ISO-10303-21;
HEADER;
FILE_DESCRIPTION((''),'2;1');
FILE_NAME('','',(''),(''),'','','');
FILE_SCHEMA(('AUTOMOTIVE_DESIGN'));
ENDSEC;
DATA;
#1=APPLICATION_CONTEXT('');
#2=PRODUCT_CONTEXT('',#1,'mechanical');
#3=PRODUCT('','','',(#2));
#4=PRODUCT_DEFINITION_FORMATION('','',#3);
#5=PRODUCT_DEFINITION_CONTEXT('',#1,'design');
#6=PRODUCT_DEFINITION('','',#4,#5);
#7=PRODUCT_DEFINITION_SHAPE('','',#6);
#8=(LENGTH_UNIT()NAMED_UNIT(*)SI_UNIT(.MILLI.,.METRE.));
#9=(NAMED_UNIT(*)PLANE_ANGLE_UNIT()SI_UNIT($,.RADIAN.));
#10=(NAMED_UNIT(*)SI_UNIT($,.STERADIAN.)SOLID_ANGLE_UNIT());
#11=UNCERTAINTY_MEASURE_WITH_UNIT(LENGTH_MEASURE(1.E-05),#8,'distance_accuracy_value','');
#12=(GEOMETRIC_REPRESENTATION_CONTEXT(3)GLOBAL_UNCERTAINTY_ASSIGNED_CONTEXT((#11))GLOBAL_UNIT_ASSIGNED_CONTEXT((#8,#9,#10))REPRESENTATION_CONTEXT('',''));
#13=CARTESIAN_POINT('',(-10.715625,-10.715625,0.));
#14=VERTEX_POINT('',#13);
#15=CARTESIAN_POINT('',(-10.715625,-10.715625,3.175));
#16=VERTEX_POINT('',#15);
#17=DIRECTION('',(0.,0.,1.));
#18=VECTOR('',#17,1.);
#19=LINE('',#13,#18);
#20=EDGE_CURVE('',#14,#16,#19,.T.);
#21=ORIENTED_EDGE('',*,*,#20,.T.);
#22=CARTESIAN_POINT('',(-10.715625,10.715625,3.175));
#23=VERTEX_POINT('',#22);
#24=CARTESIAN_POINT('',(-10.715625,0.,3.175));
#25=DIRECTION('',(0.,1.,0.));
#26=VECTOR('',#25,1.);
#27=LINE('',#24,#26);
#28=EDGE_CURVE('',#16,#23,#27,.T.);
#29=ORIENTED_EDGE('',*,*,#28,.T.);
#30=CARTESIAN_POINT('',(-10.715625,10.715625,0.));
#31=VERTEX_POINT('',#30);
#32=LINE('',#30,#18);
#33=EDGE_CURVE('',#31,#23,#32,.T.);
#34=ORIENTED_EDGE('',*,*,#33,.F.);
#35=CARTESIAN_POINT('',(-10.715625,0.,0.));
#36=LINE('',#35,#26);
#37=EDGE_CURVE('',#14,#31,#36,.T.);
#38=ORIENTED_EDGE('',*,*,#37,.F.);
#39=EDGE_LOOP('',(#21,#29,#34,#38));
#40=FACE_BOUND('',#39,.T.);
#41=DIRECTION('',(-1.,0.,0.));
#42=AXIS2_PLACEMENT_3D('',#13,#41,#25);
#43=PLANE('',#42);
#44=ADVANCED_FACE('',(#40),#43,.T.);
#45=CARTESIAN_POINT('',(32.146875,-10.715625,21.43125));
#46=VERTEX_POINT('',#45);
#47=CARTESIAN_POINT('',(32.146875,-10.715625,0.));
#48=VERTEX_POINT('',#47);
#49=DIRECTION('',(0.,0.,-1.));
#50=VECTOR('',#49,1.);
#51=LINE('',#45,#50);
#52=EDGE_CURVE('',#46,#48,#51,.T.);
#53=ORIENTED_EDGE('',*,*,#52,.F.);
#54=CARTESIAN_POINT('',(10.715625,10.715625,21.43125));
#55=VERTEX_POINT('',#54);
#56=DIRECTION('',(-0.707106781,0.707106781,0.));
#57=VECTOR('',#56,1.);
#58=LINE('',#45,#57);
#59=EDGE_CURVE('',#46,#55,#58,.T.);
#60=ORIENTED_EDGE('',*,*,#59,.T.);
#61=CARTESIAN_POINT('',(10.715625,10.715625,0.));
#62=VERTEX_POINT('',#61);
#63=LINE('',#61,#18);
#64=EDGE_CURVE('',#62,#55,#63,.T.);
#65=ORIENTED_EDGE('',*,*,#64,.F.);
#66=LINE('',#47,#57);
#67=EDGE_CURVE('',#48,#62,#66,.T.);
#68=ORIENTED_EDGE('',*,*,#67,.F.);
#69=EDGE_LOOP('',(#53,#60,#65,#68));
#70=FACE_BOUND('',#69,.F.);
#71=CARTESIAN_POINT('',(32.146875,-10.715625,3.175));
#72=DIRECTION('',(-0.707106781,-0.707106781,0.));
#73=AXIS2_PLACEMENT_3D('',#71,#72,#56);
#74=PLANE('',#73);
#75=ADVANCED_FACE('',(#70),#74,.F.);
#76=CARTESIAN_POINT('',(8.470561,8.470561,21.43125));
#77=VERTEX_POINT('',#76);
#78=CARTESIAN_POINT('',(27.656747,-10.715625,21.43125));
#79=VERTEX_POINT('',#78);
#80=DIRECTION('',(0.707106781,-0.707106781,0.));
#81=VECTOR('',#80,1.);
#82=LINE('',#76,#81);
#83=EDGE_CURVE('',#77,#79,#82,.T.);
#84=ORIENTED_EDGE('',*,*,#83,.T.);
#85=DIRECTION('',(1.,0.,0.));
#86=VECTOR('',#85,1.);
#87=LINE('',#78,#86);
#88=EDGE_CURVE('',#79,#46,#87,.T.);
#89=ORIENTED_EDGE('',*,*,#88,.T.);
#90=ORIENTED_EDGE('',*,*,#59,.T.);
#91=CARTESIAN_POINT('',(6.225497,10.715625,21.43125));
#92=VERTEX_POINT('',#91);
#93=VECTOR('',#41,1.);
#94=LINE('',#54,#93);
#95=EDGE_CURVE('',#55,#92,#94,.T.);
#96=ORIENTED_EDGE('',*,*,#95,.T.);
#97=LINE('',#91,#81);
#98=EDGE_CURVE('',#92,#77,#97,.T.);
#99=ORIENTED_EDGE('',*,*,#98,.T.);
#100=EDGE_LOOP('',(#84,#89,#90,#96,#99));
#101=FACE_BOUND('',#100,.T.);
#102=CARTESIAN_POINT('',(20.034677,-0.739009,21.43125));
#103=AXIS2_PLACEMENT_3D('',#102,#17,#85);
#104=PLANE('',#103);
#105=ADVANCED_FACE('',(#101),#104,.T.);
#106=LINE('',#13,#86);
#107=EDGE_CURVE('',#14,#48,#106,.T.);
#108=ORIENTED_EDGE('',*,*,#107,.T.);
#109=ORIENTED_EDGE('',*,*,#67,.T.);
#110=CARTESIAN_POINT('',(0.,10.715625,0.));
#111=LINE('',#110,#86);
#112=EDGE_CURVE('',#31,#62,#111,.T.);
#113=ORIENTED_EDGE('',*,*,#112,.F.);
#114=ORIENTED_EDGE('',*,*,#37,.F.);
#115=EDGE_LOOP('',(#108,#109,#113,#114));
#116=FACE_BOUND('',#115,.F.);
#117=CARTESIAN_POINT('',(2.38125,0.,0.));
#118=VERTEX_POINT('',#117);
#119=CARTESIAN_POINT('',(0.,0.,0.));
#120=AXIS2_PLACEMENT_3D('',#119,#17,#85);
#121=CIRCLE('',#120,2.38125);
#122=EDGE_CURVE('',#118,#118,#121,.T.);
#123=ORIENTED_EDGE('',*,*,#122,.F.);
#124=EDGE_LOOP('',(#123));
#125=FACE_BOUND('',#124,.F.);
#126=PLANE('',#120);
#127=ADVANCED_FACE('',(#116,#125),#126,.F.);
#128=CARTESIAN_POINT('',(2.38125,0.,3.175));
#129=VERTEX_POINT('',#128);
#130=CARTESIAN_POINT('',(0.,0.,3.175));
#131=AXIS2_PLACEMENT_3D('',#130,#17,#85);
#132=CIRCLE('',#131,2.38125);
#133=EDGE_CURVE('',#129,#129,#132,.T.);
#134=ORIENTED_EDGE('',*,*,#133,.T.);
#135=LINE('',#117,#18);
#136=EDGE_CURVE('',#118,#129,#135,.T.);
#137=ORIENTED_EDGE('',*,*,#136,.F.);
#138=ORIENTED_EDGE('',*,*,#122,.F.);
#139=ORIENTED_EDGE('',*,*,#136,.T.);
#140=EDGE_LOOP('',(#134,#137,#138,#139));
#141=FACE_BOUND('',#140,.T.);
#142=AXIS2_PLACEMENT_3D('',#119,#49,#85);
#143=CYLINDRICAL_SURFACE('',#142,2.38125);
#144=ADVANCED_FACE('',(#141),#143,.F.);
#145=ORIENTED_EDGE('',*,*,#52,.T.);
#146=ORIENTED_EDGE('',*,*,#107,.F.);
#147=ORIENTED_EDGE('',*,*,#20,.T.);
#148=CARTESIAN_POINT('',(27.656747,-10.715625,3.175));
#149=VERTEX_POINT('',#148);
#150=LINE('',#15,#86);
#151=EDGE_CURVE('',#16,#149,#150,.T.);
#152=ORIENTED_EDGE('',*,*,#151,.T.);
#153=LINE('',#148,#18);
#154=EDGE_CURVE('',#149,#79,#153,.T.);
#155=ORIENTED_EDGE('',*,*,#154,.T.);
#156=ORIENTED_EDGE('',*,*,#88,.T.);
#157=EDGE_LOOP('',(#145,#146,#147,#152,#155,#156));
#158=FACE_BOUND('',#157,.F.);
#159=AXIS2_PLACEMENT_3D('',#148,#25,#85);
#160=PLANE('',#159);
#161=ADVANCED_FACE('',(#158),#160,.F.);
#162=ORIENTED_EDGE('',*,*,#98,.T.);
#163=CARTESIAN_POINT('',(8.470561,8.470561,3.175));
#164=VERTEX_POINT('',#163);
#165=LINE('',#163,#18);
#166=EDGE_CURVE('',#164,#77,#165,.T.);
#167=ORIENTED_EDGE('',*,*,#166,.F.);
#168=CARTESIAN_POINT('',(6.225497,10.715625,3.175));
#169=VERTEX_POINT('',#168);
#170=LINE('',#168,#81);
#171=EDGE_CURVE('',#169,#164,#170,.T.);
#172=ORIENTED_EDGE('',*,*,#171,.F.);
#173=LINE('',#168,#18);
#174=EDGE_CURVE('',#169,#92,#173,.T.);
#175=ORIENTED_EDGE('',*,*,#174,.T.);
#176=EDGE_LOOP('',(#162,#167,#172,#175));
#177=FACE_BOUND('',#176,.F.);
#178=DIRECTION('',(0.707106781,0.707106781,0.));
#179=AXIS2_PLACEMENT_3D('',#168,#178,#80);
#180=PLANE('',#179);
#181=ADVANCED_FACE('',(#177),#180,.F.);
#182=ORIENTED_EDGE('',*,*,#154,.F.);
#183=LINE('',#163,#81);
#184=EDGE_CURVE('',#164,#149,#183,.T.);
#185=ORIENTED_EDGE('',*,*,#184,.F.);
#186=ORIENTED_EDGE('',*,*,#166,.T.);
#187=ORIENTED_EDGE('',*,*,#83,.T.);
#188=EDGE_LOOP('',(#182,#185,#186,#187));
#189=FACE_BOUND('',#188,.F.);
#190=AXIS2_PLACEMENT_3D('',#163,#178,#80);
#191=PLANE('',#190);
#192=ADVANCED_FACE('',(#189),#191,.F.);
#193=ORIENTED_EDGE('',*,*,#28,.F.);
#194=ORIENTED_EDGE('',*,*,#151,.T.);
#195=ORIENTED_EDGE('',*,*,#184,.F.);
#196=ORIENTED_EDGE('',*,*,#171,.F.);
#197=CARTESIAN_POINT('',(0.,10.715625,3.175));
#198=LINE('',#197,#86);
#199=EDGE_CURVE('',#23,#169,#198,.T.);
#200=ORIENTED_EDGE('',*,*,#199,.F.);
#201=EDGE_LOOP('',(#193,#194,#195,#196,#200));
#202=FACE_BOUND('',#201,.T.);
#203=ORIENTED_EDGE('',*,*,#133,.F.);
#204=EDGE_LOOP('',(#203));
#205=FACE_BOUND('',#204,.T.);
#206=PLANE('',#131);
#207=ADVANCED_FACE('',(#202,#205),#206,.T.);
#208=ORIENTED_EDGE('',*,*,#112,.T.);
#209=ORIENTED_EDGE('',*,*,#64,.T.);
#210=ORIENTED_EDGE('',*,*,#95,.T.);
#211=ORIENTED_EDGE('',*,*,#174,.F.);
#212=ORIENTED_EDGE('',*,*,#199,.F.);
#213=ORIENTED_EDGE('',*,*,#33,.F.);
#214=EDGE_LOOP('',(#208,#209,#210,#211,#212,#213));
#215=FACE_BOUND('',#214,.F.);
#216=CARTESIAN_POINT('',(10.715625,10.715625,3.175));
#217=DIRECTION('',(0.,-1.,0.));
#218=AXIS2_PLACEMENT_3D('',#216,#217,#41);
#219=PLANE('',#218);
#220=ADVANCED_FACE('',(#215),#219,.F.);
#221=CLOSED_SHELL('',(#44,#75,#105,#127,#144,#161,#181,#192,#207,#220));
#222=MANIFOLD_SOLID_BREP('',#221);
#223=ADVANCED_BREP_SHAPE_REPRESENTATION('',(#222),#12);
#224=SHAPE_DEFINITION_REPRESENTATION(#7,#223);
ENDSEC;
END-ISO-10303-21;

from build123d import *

# Parameters (mm, degrees)
F0_W     = 21.43125
F0_H     = 21.43125
F0_R     = 2.38125
F1_DEPTH = 3.175
F3_DEPTH = 18.25625


# Not quite as in the source:
# - a length typed as a fraction of an inch, garbled in the dataset ("3 / 203.2 mm" for 3/8 in), is restored


with BuildPart() as f1:
    # F0 (on Top) → F1 (new body)
    with BuildSketch(Plane.XY):
        Rectangle(F0_W, F0_H)
        Circle(F0_R, mode=Mode.SUBTRACT)
        Polygon((32.146875, -10.715625), (10.715625, 10.715625), (10.715625, -10.715625), align=None)
    extrude(amount=F1_DEPTH)

    # F2 (on face) → F3 (join)
    with BuildSketch(Plane.XY.offset(3.175)):
        Polygon((32.146875, -10.715625), (10.715625, 10.715625), (8.4705609697, 8.4705609697), (27.6567469395, -10.715625), align=None)
        Polygon((8.4705609697, 8.4705609697), (10.715625, 10.715625), (6.2254969395, 10.715625), align=None)
    extrude(amount=F3_DEPTH)


solid = f1.part
